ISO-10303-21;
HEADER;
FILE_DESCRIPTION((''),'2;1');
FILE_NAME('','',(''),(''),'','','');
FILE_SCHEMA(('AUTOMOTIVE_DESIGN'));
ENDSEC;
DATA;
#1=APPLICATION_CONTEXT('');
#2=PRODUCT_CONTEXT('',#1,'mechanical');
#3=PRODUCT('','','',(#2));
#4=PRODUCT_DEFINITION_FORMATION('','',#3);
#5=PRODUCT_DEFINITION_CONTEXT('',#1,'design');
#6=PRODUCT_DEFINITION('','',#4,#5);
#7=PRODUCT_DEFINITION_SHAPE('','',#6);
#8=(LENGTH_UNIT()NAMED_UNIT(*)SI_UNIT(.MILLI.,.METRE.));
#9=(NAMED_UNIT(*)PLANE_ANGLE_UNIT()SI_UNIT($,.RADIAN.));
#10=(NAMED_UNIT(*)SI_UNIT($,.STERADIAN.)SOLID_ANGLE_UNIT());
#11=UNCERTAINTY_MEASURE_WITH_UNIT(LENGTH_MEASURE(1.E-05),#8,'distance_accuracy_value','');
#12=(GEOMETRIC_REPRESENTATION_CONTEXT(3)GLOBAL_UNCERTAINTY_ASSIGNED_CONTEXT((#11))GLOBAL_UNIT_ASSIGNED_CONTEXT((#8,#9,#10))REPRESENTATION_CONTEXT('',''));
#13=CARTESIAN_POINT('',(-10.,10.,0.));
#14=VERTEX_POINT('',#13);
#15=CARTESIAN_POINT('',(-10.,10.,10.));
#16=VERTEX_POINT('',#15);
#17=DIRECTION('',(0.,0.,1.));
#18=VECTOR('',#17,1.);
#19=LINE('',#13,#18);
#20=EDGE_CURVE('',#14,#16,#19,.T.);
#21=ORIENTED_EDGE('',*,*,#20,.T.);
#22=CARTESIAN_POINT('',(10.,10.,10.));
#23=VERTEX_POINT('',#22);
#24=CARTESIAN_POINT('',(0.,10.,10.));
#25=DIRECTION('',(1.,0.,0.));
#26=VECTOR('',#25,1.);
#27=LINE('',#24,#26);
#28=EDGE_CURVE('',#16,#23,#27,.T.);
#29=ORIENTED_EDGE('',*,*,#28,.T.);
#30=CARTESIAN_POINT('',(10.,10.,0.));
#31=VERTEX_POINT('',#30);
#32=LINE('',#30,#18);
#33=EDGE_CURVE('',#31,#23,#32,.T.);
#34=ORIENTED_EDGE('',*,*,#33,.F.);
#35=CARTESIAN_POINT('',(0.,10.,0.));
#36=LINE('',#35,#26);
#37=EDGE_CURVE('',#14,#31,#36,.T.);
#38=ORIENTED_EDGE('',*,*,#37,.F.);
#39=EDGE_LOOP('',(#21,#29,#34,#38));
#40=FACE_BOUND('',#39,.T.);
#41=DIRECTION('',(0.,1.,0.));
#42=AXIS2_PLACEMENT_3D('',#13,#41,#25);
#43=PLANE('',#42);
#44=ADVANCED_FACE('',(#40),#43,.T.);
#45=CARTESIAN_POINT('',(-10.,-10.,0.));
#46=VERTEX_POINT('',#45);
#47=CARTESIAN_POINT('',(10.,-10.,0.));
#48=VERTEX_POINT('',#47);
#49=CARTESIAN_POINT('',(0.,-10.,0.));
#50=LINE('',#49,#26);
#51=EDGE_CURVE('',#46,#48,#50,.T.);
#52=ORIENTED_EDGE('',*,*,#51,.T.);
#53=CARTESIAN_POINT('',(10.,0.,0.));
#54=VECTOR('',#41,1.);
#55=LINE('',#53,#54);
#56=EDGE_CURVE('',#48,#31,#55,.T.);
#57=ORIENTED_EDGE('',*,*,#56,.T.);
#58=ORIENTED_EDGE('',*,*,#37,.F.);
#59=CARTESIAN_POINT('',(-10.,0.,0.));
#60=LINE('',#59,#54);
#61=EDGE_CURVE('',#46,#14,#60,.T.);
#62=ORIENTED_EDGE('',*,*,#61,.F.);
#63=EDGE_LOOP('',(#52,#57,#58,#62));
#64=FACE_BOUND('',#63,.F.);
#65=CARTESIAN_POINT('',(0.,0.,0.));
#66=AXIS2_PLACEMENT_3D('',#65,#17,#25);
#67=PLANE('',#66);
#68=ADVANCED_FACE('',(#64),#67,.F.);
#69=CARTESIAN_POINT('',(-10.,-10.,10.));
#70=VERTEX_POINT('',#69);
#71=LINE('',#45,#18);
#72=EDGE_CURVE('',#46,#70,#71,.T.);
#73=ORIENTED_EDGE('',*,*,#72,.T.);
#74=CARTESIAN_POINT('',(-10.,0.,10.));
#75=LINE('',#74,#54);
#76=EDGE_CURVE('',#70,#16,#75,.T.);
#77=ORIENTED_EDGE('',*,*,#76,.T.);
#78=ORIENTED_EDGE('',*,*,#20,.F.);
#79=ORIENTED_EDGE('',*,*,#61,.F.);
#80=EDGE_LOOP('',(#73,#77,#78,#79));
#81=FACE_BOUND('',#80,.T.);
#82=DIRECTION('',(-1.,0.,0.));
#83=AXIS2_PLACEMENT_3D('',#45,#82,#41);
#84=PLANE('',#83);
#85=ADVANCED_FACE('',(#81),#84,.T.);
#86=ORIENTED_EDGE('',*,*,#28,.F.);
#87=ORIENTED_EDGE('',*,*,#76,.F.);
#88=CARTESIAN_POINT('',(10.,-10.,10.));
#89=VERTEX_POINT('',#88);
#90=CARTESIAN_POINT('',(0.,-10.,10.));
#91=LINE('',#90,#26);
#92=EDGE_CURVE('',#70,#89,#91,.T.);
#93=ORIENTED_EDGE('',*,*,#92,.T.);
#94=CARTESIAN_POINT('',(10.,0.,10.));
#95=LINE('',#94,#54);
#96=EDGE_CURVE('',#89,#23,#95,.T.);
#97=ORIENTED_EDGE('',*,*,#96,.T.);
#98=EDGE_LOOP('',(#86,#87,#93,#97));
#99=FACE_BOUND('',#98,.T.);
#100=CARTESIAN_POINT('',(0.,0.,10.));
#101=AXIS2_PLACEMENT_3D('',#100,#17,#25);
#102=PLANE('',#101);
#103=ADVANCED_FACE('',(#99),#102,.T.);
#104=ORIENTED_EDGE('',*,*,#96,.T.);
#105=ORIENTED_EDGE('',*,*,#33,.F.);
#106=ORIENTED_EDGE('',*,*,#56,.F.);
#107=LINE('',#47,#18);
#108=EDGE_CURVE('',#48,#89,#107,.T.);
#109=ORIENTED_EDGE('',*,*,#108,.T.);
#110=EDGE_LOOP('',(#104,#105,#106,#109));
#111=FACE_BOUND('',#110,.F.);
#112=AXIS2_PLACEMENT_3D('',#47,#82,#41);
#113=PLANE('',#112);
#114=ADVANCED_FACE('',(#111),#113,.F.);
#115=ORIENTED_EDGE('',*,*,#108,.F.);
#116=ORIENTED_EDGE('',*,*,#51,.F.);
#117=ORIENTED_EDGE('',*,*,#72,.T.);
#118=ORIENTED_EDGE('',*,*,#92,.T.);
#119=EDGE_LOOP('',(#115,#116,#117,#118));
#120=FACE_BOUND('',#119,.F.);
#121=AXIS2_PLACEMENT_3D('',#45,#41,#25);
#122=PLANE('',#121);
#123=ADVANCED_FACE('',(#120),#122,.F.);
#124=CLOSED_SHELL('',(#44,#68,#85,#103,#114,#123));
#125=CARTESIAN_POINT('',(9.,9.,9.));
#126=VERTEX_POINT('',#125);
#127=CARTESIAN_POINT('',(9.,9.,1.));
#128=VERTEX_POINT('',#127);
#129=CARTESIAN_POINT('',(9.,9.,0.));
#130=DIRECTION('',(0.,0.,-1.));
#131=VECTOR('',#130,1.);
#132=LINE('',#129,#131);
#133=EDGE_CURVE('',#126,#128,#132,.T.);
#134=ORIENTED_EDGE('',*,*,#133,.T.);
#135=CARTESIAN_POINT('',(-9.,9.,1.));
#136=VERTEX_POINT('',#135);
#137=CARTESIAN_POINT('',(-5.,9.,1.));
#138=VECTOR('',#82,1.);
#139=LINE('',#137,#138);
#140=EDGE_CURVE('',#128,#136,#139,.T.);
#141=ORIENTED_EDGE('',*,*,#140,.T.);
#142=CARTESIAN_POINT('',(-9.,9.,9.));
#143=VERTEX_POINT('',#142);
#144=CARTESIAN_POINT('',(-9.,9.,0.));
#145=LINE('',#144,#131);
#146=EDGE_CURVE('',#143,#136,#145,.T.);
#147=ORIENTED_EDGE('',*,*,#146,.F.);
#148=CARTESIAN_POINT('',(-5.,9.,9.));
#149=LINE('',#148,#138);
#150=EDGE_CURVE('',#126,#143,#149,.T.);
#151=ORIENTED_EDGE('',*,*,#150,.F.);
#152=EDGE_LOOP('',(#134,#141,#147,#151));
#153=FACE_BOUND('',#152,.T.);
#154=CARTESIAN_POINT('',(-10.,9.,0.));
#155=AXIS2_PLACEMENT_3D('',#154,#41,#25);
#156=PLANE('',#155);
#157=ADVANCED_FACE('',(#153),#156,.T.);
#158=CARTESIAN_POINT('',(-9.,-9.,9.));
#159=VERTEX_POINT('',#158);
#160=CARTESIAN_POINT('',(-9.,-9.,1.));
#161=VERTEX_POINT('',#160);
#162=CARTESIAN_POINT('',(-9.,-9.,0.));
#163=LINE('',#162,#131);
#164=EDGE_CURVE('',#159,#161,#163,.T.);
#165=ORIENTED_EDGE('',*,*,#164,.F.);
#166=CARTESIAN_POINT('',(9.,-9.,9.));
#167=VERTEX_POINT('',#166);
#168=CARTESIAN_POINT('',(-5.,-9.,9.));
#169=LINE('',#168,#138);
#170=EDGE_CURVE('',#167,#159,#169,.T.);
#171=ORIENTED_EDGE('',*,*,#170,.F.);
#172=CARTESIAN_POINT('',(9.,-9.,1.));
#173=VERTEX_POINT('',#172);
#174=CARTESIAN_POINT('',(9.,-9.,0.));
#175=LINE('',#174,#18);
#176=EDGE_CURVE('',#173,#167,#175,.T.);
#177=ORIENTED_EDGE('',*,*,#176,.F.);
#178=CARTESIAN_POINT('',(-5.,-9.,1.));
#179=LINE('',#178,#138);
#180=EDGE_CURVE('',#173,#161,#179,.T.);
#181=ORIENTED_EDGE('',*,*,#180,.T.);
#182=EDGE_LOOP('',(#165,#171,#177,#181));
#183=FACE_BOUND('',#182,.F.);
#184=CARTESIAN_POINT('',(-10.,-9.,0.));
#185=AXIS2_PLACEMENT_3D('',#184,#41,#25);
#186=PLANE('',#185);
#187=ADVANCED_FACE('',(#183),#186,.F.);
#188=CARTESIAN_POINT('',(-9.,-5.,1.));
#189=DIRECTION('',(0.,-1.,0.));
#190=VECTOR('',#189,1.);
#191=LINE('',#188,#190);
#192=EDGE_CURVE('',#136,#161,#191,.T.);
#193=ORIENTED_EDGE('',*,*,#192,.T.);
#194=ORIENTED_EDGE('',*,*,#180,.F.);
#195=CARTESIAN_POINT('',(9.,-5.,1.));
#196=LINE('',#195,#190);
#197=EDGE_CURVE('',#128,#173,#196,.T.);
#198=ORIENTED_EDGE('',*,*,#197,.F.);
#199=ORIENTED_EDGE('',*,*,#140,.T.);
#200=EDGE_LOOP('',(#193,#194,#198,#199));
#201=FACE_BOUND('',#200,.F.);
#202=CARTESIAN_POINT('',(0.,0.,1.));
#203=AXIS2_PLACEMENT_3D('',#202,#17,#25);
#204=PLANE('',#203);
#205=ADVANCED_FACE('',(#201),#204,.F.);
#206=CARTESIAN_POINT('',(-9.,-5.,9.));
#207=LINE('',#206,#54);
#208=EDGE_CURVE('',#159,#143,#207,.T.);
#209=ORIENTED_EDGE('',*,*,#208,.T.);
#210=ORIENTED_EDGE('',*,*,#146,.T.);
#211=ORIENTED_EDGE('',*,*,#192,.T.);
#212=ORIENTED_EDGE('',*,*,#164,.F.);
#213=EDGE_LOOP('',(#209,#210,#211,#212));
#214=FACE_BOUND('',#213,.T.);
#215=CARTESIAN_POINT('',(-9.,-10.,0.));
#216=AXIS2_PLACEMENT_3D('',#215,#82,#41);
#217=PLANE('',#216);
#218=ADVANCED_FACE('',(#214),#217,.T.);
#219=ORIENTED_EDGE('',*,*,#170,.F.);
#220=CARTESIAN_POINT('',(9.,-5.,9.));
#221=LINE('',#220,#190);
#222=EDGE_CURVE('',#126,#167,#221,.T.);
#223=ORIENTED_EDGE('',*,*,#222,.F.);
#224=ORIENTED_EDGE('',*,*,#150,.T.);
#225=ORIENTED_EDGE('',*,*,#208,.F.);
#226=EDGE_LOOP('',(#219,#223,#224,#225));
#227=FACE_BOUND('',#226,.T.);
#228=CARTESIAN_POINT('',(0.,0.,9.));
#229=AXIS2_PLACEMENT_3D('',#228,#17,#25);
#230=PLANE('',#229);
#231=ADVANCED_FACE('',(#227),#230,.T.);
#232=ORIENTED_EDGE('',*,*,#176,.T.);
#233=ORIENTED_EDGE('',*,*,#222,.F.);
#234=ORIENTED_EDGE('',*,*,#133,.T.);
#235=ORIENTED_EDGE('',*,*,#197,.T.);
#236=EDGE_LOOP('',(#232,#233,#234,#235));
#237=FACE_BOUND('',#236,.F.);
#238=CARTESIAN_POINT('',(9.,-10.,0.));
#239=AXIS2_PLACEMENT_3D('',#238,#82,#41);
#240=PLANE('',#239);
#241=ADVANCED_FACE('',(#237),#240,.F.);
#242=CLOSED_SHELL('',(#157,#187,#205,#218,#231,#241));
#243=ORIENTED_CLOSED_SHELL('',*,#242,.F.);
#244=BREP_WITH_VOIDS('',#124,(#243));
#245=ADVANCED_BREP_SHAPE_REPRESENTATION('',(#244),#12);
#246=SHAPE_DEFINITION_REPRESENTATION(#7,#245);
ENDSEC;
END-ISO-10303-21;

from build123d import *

# Parameters (mm, degrees)
F0_W     = 20
F0_H     = 20
F1_DEPTH = 10
F2_T     = -1


# Not quite as in the source:
# - a feature names something its author has since deleted; it is built from what else it names


with BuildPart() as f1:
    # F0 (on Top) → F1 (new body)
    with BuildSketch(Plane.XY):
        Rectangle(F0_W, F0_H)
    extrude(amount=F1_DEPTH)

    # F2 (hollow: no face is removed)
    offset(amount=F2_T, mode=Mode.SUBTRACT)


solid = f1.part
